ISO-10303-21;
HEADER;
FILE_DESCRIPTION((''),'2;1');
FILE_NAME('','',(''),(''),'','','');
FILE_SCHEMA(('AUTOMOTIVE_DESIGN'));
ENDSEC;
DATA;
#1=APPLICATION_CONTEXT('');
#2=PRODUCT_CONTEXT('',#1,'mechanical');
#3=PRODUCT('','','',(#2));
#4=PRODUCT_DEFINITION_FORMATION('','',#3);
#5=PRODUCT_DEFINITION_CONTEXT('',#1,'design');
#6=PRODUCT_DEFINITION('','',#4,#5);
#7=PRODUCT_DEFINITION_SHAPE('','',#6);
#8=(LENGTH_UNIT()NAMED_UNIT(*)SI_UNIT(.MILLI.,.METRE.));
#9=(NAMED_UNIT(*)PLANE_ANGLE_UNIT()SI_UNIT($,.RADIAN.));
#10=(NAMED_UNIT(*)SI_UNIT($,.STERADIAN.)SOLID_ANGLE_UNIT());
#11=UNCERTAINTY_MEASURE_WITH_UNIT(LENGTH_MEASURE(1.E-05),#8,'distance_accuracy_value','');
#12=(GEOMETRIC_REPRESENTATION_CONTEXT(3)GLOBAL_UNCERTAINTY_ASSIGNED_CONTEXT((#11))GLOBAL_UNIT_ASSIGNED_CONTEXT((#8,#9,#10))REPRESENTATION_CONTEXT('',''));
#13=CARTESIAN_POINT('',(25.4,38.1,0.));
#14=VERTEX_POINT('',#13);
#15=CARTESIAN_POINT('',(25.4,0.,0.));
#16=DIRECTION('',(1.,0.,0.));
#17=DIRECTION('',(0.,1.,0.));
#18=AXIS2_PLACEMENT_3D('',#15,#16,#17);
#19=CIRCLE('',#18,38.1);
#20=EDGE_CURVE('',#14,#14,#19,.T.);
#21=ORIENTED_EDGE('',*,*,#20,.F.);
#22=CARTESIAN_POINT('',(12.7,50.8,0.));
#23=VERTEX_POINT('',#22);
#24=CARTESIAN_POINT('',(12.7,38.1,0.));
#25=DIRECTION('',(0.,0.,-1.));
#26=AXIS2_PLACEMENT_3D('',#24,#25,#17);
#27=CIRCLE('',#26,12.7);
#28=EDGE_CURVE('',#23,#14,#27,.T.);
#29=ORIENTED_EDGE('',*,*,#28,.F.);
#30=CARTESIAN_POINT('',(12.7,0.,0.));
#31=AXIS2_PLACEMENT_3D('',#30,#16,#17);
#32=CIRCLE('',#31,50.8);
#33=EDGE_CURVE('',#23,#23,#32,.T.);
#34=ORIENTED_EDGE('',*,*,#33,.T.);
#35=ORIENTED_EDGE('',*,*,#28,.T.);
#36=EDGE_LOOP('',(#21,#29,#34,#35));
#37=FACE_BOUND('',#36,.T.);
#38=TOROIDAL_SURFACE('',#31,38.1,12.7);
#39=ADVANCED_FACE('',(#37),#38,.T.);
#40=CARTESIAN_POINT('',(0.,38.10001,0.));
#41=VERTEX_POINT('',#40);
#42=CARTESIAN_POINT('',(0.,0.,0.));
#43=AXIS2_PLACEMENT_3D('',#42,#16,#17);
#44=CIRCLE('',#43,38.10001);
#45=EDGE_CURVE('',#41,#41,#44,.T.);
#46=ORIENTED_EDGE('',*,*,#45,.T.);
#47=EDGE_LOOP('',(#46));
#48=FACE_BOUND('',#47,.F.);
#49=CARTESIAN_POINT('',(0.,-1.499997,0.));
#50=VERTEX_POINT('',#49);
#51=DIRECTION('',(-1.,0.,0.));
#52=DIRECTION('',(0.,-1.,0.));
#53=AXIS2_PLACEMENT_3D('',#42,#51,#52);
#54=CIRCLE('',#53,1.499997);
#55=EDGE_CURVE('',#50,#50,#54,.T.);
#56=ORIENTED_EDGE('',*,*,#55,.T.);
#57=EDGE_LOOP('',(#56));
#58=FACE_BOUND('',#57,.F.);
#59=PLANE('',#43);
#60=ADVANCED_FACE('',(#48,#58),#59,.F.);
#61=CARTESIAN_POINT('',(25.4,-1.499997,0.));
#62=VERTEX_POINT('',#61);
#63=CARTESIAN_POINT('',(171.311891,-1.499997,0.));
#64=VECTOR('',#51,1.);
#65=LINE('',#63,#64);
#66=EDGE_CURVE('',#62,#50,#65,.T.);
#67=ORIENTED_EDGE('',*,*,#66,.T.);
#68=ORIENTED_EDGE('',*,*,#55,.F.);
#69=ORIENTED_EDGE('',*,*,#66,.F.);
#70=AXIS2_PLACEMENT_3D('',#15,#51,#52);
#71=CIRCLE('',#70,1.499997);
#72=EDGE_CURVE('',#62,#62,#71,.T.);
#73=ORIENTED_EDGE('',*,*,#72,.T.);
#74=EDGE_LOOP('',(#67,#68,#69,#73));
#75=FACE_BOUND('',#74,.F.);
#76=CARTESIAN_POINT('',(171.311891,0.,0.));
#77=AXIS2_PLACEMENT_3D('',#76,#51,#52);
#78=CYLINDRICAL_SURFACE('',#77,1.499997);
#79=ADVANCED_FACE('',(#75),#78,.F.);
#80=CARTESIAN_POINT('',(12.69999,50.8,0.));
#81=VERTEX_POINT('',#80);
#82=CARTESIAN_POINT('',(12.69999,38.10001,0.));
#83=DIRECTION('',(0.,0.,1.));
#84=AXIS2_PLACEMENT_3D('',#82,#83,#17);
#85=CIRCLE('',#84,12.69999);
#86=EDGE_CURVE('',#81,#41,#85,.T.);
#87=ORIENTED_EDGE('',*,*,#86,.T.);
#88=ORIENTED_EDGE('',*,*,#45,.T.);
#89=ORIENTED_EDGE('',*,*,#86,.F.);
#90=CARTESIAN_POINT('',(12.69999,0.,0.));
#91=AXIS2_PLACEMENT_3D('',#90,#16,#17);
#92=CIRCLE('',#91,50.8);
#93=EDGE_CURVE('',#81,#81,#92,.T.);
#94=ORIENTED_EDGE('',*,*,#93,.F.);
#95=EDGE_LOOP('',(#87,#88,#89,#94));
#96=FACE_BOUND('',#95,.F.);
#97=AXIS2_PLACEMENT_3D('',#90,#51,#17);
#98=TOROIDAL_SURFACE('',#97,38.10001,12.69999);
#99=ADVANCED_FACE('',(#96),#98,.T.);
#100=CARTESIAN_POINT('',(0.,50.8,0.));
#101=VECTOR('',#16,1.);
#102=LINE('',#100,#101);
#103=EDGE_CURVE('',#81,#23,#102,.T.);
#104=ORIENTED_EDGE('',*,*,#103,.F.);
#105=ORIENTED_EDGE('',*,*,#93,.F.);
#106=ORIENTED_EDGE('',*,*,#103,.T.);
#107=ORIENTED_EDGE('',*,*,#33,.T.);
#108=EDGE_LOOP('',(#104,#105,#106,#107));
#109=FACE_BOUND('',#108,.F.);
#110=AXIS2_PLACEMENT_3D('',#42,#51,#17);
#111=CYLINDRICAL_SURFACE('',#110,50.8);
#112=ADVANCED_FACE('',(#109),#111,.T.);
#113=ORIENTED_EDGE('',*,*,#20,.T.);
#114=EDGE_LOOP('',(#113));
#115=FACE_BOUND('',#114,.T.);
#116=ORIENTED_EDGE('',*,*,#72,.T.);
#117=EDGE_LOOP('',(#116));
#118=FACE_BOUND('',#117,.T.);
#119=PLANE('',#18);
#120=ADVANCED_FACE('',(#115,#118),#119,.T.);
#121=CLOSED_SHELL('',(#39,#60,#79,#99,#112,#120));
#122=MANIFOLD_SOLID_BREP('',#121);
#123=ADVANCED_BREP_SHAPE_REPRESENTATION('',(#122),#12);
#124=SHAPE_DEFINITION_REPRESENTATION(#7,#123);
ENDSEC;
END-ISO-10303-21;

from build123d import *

# Parameters (mm, degrees)
F0_R     = 50.8
F1_DEPTH = 25.4
F2_R     = 12.7
F3_R     = 12.69999
F5_D     = 2.999994


# Not quite as in the source:
# - a fillet or chamfer is up to 0.001 mm smaller than in the source, because OpenCascade refuses the exact size


with BuildPart() as f1:
    # F0 (on Right) → F1 (new body)
    with BuildSketch(Plane.YZ):
        Circle(F0_R)
    extrude(amount=F1_DEPTH)

    # F2
    f2_edges = [f1.edges().sort_by_distance(p)[0] for p in [
        (25.4, -50.8, 0),
    ]]
    fillet(f2_edges, radius=F2_R)

    # F3 (radius 12.7 in the source; OpenCascade refuses exactly that, so slightly less here)
    f3_edges = [f1.edges().sort_by_distance(p)[0] for p in [
        (0, -50.8, 0),
    ]]
    fillet(f3_edges, radius=F3_R)

    # F5 (through all)
    with Locations(Plane.YZ.offset(25.4)):
        with Locations((0, 0)):
            Hole(F5_D / 2)


solid = f1.part
